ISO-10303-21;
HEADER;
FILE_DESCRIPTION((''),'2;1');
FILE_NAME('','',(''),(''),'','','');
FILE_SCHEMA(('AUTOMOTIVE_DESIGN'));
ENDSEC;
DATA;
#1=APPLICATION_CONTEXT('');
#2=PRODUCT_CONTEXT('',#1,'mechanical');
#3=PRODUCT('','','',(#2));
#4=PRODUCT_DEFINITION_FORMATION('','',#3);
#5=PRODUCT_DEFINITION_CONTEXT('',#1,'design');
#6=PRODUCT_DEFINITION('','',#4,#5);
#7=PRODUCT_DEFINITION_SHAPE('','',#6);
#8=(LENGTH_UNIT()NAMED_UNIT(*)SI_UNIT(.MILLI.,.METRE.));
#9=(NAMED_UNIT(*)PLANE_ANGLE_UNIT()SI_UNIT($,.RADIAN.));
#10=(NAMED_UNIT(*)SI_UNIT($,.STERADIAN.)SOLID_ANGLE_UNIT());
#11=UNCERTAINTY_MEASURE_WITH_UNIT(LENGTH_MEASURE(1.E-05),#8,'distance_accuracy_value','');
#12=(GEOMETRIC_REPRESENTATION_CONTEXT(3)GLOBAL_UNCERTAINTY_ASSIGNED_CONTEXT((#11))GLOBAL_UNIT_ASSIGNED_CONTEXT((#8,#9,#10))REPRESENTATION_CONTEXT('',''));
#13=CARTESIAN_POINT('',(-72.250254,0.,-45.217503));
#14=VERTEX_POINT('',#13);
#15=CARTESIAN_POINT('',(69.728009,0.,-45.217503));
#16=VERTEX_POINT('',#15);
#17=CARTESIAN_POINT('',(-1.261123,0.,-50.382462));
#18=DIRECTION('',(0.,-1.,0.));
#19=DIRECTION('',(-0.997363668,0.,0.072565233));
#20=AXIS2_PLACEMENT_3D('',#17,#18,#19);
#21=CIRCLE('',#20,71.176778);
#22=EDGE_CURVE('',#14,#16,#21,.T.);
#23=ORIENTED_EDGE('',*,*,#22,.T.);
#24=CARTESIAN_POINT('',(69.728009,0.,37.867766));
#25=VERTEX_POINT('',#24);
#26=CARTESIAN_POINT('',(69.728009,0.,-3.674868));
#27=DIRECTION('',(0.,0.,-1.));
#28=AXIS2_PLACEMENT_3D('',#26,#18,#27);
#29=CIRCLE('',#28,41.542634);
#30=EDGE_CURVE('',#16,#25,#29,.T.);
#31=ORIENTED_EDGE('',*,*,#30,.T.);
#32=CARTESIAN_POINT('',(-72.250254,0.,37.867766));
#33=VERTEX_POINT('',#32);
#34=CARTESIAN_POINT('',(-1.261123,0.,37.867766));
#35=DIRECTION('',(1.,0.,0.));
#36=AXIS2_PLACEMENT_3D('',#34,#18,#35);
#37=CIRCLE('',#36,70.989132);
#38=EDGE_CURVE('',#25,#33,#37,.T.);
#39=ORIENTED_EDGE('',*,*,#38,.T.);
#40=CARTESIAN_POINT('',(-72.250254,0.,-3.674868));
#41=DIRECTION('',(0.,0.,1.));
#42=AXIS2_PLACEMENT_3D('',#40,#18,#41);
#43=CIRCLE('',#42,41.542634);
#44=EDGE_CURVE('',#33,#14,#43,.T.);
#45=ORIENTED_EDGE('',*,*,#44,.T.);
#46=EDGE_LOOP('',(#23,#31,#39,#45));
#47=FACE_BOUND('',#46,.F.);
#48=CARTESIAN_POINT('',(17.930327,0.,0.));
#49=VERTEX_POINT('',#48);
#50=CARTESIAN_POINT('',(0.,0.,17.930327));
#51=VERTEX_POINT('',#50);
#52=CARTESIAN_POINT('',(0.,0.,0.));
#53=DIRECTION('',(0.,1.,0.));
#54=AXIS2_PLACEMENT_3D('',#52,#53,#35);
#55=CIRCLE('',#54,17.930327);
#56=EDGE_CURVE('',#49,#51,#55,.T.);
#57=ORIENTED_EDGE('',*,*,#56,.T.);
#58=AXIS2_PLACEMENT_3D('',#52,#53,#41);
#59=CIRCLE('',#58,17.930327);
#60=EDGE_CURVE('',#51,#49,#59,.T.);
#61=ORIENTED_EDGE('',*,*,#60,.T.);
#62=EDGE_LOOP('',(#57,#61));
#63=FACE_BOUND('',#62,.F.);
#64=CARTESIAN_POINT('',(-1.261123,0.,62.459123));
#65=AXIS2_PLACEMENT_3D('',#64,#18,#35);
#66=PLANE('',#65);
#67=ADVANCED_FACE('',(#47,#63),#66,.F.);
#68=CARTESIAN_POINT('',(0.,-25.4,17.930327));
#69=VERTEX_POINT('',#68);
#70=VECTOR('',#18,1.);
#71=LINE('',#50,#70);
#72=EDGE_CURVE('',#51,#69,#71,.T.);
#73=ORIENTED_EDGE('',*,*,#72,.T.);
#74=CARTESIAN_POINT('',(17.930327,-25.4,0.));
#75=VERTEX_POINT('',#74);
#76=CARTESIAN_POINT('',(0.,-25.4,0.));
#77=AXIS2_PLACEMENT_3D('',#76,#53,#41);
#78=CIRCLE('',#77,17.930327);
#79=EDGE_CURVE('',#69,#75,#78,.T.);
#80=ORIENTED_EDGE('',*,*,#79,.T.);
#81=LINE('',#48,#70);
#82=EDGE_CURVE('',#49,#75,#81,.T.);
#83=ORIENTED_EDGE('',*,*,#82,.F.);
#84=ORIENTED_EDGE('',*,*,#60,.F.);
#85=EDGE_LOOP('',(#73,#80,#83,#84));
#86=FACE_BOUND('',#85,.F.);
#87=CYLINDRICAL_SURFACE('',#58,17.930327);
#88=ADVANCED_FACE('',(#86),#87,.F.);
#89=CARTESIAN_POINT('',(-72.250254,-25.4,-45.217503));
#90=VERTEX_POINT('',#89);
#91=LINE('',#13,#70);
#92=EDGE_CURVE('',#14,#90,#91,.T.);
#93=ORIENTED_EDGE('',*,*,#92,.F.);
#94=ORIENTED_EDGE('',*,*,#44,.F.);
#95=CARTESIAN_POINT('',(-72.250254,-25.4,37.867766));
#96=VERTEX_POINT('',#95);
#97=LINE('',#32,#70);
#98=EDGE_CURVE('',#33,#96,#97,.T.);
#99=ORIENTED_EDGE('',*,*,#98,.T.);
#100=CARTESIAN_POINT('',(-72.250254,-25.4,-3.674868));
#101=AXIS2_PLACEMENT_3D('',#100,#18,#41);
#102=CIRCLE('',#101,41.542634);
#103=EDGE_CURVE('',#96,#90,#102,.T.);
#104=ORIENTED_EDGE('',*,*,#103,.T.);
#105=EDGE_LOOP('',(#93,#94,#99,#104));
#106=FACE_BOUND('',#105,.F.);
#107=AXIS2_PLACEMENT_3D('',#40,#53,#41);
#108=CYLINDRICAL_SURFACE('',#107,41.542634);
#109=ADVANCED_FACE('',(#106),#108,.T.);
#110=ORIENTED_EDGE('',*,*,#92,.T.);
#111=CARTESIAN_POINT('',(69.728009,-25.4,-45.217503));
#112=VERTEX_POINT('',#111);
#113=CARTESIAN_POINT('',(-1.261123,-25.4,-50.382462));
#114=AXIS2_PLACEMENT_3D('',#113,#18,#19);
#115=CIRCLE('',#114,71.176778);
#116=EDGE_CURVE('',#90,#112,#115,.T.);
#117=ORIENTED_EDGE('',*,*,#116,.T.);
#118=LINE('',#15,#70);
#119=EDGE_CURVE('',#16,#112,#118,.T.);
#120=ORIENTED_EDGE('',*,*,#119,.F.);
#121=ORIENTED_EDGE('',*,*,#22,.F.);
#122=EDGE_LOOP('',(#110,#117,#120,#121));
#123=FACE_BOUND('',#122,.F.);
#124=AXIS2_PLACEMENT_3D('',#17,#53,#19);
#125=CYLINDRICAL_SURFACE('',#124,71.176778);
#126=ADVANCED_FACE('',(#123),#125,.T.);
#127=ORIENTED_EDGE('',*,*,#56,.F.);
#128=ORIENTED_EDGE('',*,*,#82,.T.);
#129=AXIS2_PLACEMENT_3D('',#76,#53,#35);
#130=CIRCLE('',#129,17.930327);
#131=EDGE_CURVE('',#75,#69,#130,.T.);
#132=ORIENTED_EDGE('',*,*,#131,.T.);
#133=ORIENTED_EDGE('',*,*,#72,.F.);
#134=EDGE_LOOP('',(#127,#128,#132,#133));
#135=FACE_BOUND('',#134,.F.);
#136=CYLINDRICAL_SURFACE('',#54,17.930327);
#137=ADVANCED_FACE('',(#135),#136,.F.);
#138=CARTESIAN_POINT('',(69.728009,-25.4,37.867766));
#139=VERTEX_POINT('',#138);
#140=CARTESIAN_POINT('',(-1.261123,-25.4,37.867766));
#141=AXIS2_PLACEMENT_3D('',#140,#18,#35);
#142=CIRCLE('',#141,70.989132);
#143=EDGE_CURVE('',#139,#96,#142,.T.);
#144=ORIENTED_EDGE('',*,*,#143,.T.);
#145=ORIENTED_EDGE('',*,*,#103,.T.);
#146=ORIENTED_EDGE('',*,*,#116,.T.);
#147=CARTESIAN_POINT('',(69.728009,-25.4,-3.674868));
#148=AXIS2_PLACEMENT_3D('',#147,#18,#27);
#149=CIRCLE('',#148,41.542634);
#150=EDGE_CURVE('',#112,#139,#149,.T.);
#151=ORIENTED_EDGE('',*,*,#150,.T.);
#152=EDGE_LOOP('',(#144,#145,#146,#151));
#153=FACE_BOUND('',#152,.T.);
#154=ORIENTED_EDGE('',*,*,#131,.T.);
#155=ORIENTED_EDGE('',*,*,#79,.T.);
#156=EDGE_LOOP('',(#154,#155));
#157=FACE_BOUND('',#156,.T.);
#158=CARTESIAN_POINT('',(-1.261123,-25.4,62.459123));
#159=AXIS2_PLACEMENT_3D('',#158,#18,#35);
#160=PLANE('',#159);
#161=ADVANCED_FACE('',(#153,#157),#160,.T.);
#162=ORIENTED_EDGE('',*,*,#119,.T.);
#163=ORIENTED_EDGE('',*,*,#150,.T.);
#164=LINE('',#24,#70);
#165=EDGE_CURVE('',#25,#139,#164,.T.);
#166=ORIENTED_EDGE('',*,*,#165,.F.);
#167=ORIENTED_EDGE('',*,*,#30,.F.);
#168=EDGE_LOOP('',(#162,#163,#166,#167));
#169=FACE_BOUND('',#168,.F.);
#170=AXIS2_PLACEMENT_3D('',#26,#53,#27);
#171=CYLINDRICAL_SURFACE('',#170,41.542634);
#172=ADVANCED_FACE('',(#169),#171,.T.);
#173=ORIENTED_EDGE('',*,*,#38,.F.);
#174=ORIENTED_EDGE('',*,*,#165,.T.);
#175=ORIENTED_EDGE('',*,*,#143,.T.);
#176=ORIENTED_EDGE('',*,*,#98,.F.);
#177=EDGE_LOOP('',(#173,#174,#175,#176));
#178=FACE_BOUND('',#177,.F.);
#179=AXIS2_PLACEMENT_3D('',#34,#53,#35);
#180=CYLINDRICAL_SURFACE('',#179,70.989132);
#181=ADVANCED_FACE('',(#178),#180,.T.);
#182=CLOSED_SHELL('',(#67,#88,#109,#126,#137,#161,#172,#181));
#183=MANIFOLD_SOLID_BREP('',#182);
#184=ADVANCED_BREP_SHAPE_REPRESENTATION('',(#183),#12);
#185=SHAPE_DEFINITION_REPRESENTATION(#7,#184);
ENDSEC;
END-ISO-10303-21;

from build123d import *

# Parameters (mm, degrees)
F1_DEPTH = 25.4


with BuildPart() as f1:
    # F0 (on Front) → F1 (new body)
    with BuildSketch(Plane.XZ):
        with BuildLine():
            ThreePointArc((69.7280094028, 37.8677658737), (-1.2611225247, 108.8568978012), (-72.2502544522, 37.8677658737))
            Line((-72.2502544522, 37.8677658737), (-51.3892844319, 37.8677658737))
            Line((-51.3892844319, 37.8677658737), (0, 37.8677658737))
            Line((0, 37.8677658737), (69.7280094028, 37.8677658737))
        make_face()
        Polygon((-51.3892844319, 37.8677658737), (-72.2502544522, 37.8677658737), (-72.2502544522, -45.2175028622), (69.7280094028, -45.2175028622), (69.7280094028, -29.6100229025), (-51.3892844319, -29.6100229025), align=None)
        with BuildLine():
            Line((-72.2502544522, -45.2175028622), (-72.2502544522, 37.8677658737))
            ThreePointArc((-72.2502544522, 37.8677658737), (-113.7928888202, -3.6748684943), (-72.2502544522, -45.2175028622))
        make_face()
        with BuildLine():
            Line((0, 37.8677658737), (-51.3892844319, 37.8677658737))
            Line((-51.3892844319, 37.8677658737), (-51.3892844319, -29.6100229025))
            Line((-51.3892844319, -29.6100229025), (69.7280094028, -29.6100229025))
            Line((69.7280094028, -29.6100229025), (69.7280094028, 0))
            Line((69.7280094028, 0), (17.9303269799, 0))
            ThreePointArc((17.9303269799, 0), (-12.6786557964, -12.6786557964), (0, 17.9303269799))
            Line((0, 17.9303269799), (0, 37.8677658737))
        make_face()
        with BuildLine():
            Line((69.7280094028, -45.2175028622), (-72.2502544522, -45.2175028622))
            ThreePointArc((-72.2502544522, -45.2175028622), (-1.2611225247, -121.5592398304), (69.7280094028, -45.2175028622))
        make_face()
        with BuildLine():
            Line((69.7280094028, 0), (69.7280094028, 37.8677658737))
            Line((69.7280094028, 37.8677658737), (0, 37.8677658737))
            Line((0, 37.8677658737), (0, 17.9303269799))
            ThreePointArc((0, 17.9303269799), (12.6786557964, 12.6786557964), (17.9303269799, 0))
            Line((17.9303269799, 0), (69.7280094028, 0))
        make_face()
        with BuildLine():
            ThreePointArc((69.7280094028, -45.2175028622), (111.2706437707, -3.6748684943), (69.7280094028, 37.8677658737))
            Line((69.7280094028, 37.8677658737), (69.7280094028, 0))
            Line((69.7280094028, 0), (69.7280094028, -29.6100229025))
            Line((69.7280094028, -29.6100229025), (69.7280094028, -45.2175028622))
        make_face()
    extrude(amount=F1_DEPTH)


solid = f1.part
